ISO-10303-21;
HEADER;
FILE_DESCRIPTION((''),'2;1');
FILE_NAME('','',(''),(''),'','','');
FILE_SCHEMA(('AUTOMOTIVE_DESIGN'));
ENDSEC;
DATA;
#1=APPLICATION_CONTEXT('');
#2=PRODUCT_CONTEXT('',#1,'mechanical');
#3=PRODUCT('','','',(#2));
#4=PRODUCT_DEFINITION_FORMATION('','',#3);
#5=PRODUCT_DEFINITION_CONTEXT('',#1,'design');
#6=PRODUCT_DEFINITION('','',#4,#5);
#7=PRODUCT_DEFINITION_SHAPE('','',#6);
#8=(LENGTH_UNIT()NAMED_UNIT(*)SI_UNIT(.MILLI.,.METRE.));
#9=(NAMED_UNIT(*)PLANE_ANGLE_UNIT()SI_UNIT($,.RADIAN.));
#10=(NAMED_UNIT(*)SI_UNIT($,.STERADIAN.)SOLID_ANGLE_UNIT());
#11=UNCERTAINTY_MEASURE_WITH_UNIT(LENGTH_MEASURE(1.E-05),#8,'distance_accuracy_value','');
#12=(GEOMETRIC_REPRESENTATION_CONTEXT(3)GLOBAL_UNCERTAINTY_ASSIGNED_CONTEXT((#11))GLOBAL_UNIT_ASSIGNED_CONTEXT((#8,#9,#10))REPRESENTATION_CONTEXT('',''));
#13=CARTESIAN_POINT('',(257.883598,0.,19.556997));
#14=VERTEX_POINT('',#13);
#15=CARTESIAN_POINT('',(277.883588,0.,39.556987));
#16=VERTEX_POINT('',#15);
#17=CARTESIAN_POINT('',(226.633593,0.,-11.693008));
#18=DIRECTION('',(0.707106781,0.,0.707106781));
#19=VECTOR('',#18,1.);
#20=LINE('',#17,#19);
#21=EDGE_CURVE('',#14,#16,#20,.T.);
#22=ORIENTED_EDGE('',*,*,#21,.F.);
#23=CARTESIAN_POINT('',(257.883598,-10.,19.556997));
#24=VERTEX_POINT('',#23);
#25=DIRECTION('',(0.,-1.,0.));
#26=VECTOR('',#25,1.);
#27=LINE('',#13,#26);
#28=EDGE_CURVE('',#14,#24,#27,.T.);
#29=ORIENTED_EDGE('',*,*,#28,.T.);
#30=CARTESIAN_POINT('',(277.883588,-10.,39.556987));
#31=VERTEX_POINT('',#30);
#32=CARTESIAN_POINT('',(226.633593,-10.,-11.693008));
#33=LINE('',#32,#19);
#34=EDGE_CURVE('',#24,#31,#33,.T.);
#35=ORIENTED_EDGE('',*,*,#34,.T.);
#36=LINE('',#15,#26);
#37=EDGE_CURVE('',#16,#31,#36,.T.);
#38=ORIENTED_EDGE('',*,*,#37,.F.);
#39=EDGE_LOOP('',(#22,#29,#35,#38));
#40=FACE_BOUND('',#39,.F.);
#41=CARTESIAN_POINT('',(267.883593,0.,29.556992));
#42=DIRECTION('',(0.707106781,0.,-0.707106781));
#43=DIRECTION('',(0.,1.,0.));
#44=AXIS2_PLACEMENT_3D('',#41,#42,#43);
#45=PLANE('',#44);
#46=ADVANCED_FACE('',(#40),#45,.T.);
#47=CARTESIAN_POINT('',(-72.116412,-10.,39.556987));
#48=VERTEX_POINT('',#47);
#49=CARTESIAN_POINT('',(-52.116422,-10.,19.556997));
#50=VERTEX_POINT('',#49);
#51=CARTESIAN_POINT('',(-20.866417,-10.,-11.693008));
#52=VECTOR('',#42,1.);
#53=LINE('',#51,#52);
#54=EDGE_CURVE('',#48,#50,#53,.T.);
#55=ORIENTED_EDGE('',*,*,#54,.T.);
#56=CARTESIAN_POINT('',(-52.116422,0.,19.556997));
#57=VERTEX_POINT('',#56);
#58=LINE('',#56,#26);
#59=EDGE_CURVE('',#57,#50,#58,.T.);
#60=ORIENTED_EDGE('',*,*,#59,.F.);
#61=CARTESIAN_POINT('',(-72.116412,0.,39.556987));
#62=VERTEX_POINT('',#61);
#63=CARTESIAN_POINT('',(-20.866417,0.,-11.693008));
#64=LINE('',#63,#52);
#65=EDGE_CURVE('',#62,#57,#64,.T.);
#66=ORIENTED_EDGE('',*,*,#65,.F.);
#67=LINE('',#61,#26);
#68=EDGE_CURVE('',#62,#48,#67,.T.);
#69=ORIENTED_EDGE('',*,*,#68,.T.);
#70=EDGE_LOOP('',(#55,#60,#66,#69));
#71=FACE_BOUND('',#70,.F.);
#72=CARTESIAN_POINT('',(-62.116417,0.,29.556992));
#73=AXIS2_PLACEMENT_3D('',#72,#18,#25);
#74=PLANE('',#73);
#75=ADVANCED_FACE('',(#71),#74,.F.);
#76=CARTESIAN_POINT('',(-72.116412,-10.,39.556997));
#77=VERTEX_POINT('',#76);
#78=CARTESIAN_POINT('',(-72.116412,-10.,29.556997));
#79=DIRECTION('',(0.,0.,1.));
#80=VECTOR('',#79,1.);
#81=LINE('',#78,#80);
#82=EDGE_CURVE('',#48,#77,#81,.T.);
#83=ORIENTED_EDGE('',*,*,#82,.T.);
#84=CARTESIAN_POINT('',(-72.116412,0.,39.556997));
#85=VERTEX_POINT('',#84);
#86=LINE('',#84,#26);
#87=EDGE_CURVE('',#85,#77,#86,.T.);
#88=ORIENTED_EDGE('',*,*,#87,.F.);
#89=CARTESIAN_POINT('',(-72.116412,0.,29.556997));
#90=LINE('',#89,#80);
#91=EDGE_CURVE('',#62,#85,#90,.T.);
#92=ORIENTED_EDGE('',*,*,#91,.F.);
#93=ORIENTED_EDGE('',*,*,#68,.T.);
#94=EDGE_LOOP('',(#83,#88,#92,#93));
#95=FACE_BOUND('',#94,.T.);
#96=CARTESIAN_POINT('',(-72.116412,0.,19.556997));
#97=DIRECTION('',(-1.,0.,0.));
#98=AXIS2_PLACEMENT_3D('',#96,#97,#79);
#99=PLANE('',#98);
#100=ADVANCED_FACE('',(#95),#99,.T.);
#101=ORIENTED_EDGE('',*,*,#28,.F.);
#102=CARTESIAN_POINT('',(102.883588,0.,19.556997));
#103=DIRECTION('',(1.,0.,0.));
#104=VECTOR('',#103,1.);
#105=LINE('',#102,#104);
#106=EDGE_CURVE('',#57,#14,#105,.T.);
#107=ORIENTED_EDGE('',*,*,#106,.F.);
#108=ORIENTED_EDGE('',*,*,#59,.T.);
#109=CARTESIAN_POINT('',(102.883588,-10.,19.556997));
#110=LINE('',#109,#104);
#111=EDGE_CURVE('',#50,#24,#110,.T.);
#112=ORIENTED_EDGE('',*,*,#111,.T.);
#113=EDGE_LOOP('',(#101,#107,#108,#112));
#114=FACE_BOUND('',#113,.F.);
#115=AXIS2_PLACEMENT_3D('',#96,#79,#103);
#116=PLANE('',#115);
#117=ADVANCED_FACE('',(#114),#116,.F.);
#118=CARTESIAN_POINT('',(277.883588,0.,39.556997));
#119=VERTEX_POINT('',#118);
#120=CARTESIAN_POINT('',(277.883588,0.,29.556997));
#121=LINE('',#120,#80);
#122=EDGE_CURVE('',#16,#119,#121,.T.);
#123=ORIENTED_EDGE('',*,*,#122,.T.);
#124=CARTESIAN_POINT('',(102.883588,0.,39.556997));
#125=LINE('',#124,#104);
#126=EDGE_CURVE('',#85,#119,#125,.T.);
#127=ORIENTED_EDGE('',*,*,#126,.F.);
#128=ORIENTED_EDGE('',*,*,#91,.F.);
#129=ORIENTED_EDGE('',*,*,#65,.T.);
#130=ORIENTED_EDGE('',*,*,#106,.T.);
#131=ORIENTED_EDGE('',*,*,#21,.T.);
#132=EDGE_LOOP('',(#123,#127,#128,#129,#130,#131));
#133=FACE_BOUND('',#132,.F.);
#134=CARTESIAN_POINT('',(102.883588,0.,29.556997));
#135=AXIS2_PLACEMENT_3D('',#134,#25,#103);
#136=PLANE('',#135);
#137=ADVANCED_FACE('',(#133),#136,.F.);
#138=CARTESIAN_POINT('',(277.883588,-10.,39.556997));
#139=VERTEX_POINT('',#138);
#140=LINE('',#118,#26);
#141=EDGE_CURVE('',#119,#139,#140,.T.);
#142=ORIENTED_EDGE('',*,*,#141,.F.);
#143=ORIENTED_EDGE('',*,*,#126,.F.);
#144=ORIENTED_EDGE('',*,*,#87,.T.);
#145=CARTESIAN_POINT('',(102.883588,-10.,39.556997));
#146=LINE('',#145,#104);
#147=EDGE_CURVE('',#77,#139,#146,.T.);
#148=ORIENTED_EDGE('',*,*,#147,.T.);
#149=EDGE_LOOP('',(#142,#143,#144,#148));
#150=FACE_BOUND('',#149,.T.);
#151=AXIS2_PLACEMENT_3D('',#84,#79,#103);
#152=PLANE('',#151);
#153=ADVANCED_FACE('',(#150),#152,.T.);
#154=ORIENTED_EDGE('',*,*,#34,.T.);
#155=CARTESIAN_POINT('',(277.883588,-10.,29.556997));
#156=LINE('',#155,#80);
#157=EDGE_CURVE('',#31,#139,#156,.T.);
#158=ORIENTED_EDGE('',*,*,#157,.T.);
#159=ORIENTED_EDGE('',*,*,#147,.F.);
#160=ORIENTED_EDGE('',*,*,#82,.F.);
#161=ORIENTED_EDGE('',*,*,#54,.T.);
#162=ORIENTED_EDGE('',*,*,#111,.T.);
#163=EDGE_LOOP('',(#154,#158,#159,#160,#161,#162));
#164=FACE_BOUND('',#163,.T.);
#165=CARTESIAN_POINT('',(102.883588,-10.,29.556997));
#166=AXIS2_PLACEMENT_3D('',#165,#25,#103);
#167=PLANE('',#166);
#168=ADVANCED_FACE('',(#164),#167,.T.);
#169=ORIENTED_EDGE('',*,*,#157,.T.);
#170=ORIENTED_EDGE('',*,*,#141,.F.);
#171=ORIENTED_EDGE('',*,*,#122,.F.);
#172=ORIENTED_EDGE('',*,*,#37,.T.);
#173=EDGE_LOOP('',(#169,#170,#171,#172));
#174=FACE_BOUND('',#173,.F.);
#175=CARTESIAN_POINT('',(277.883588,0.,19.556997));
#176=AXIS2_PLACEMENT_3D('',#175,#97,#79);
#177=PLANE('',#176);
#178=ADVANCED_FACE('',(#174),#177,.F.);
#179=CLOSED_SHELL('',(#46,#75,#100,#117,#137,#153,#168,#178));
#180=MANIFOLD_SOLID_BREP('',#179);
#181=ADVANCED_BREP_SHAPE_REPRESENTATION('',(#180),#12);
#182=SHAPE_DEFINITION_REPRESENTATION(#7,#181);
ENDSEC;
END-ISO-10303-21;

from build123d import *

# Parameters (mm, degrees)
F0_W     = 350
F0_H     = 20
F1_DEPTH = 10
F2_SIZE  = 19.99999


# Not quite as in the source:
# - a fillet or chamfer is up to 0.001 mm smaller than in the source, because OpenCascade refuses the exact size


with BuildPart() as f1:
    # F0 (on Front) → F1 (new body)
    with BuildSketch(Plane.XZ):
        with Locations((102.8835877776, 29.5569973439)):
            Rectangle(F0_W, F0_H)
    extrude(amount=F1_DEPTH)

    # F2 (size 20 in the source; OpenCascade refuses exactly that, so slightly less here)
    f2_edges = [f1.edges().sort_by_distance(p)[0] for p in [
        (-72.116412, -5, 19.556997),
        (277.883588, -5, 19.556997),
    ]]
    chamfer(f2_edges, length=F2_SIZE)


solid = f1.part
